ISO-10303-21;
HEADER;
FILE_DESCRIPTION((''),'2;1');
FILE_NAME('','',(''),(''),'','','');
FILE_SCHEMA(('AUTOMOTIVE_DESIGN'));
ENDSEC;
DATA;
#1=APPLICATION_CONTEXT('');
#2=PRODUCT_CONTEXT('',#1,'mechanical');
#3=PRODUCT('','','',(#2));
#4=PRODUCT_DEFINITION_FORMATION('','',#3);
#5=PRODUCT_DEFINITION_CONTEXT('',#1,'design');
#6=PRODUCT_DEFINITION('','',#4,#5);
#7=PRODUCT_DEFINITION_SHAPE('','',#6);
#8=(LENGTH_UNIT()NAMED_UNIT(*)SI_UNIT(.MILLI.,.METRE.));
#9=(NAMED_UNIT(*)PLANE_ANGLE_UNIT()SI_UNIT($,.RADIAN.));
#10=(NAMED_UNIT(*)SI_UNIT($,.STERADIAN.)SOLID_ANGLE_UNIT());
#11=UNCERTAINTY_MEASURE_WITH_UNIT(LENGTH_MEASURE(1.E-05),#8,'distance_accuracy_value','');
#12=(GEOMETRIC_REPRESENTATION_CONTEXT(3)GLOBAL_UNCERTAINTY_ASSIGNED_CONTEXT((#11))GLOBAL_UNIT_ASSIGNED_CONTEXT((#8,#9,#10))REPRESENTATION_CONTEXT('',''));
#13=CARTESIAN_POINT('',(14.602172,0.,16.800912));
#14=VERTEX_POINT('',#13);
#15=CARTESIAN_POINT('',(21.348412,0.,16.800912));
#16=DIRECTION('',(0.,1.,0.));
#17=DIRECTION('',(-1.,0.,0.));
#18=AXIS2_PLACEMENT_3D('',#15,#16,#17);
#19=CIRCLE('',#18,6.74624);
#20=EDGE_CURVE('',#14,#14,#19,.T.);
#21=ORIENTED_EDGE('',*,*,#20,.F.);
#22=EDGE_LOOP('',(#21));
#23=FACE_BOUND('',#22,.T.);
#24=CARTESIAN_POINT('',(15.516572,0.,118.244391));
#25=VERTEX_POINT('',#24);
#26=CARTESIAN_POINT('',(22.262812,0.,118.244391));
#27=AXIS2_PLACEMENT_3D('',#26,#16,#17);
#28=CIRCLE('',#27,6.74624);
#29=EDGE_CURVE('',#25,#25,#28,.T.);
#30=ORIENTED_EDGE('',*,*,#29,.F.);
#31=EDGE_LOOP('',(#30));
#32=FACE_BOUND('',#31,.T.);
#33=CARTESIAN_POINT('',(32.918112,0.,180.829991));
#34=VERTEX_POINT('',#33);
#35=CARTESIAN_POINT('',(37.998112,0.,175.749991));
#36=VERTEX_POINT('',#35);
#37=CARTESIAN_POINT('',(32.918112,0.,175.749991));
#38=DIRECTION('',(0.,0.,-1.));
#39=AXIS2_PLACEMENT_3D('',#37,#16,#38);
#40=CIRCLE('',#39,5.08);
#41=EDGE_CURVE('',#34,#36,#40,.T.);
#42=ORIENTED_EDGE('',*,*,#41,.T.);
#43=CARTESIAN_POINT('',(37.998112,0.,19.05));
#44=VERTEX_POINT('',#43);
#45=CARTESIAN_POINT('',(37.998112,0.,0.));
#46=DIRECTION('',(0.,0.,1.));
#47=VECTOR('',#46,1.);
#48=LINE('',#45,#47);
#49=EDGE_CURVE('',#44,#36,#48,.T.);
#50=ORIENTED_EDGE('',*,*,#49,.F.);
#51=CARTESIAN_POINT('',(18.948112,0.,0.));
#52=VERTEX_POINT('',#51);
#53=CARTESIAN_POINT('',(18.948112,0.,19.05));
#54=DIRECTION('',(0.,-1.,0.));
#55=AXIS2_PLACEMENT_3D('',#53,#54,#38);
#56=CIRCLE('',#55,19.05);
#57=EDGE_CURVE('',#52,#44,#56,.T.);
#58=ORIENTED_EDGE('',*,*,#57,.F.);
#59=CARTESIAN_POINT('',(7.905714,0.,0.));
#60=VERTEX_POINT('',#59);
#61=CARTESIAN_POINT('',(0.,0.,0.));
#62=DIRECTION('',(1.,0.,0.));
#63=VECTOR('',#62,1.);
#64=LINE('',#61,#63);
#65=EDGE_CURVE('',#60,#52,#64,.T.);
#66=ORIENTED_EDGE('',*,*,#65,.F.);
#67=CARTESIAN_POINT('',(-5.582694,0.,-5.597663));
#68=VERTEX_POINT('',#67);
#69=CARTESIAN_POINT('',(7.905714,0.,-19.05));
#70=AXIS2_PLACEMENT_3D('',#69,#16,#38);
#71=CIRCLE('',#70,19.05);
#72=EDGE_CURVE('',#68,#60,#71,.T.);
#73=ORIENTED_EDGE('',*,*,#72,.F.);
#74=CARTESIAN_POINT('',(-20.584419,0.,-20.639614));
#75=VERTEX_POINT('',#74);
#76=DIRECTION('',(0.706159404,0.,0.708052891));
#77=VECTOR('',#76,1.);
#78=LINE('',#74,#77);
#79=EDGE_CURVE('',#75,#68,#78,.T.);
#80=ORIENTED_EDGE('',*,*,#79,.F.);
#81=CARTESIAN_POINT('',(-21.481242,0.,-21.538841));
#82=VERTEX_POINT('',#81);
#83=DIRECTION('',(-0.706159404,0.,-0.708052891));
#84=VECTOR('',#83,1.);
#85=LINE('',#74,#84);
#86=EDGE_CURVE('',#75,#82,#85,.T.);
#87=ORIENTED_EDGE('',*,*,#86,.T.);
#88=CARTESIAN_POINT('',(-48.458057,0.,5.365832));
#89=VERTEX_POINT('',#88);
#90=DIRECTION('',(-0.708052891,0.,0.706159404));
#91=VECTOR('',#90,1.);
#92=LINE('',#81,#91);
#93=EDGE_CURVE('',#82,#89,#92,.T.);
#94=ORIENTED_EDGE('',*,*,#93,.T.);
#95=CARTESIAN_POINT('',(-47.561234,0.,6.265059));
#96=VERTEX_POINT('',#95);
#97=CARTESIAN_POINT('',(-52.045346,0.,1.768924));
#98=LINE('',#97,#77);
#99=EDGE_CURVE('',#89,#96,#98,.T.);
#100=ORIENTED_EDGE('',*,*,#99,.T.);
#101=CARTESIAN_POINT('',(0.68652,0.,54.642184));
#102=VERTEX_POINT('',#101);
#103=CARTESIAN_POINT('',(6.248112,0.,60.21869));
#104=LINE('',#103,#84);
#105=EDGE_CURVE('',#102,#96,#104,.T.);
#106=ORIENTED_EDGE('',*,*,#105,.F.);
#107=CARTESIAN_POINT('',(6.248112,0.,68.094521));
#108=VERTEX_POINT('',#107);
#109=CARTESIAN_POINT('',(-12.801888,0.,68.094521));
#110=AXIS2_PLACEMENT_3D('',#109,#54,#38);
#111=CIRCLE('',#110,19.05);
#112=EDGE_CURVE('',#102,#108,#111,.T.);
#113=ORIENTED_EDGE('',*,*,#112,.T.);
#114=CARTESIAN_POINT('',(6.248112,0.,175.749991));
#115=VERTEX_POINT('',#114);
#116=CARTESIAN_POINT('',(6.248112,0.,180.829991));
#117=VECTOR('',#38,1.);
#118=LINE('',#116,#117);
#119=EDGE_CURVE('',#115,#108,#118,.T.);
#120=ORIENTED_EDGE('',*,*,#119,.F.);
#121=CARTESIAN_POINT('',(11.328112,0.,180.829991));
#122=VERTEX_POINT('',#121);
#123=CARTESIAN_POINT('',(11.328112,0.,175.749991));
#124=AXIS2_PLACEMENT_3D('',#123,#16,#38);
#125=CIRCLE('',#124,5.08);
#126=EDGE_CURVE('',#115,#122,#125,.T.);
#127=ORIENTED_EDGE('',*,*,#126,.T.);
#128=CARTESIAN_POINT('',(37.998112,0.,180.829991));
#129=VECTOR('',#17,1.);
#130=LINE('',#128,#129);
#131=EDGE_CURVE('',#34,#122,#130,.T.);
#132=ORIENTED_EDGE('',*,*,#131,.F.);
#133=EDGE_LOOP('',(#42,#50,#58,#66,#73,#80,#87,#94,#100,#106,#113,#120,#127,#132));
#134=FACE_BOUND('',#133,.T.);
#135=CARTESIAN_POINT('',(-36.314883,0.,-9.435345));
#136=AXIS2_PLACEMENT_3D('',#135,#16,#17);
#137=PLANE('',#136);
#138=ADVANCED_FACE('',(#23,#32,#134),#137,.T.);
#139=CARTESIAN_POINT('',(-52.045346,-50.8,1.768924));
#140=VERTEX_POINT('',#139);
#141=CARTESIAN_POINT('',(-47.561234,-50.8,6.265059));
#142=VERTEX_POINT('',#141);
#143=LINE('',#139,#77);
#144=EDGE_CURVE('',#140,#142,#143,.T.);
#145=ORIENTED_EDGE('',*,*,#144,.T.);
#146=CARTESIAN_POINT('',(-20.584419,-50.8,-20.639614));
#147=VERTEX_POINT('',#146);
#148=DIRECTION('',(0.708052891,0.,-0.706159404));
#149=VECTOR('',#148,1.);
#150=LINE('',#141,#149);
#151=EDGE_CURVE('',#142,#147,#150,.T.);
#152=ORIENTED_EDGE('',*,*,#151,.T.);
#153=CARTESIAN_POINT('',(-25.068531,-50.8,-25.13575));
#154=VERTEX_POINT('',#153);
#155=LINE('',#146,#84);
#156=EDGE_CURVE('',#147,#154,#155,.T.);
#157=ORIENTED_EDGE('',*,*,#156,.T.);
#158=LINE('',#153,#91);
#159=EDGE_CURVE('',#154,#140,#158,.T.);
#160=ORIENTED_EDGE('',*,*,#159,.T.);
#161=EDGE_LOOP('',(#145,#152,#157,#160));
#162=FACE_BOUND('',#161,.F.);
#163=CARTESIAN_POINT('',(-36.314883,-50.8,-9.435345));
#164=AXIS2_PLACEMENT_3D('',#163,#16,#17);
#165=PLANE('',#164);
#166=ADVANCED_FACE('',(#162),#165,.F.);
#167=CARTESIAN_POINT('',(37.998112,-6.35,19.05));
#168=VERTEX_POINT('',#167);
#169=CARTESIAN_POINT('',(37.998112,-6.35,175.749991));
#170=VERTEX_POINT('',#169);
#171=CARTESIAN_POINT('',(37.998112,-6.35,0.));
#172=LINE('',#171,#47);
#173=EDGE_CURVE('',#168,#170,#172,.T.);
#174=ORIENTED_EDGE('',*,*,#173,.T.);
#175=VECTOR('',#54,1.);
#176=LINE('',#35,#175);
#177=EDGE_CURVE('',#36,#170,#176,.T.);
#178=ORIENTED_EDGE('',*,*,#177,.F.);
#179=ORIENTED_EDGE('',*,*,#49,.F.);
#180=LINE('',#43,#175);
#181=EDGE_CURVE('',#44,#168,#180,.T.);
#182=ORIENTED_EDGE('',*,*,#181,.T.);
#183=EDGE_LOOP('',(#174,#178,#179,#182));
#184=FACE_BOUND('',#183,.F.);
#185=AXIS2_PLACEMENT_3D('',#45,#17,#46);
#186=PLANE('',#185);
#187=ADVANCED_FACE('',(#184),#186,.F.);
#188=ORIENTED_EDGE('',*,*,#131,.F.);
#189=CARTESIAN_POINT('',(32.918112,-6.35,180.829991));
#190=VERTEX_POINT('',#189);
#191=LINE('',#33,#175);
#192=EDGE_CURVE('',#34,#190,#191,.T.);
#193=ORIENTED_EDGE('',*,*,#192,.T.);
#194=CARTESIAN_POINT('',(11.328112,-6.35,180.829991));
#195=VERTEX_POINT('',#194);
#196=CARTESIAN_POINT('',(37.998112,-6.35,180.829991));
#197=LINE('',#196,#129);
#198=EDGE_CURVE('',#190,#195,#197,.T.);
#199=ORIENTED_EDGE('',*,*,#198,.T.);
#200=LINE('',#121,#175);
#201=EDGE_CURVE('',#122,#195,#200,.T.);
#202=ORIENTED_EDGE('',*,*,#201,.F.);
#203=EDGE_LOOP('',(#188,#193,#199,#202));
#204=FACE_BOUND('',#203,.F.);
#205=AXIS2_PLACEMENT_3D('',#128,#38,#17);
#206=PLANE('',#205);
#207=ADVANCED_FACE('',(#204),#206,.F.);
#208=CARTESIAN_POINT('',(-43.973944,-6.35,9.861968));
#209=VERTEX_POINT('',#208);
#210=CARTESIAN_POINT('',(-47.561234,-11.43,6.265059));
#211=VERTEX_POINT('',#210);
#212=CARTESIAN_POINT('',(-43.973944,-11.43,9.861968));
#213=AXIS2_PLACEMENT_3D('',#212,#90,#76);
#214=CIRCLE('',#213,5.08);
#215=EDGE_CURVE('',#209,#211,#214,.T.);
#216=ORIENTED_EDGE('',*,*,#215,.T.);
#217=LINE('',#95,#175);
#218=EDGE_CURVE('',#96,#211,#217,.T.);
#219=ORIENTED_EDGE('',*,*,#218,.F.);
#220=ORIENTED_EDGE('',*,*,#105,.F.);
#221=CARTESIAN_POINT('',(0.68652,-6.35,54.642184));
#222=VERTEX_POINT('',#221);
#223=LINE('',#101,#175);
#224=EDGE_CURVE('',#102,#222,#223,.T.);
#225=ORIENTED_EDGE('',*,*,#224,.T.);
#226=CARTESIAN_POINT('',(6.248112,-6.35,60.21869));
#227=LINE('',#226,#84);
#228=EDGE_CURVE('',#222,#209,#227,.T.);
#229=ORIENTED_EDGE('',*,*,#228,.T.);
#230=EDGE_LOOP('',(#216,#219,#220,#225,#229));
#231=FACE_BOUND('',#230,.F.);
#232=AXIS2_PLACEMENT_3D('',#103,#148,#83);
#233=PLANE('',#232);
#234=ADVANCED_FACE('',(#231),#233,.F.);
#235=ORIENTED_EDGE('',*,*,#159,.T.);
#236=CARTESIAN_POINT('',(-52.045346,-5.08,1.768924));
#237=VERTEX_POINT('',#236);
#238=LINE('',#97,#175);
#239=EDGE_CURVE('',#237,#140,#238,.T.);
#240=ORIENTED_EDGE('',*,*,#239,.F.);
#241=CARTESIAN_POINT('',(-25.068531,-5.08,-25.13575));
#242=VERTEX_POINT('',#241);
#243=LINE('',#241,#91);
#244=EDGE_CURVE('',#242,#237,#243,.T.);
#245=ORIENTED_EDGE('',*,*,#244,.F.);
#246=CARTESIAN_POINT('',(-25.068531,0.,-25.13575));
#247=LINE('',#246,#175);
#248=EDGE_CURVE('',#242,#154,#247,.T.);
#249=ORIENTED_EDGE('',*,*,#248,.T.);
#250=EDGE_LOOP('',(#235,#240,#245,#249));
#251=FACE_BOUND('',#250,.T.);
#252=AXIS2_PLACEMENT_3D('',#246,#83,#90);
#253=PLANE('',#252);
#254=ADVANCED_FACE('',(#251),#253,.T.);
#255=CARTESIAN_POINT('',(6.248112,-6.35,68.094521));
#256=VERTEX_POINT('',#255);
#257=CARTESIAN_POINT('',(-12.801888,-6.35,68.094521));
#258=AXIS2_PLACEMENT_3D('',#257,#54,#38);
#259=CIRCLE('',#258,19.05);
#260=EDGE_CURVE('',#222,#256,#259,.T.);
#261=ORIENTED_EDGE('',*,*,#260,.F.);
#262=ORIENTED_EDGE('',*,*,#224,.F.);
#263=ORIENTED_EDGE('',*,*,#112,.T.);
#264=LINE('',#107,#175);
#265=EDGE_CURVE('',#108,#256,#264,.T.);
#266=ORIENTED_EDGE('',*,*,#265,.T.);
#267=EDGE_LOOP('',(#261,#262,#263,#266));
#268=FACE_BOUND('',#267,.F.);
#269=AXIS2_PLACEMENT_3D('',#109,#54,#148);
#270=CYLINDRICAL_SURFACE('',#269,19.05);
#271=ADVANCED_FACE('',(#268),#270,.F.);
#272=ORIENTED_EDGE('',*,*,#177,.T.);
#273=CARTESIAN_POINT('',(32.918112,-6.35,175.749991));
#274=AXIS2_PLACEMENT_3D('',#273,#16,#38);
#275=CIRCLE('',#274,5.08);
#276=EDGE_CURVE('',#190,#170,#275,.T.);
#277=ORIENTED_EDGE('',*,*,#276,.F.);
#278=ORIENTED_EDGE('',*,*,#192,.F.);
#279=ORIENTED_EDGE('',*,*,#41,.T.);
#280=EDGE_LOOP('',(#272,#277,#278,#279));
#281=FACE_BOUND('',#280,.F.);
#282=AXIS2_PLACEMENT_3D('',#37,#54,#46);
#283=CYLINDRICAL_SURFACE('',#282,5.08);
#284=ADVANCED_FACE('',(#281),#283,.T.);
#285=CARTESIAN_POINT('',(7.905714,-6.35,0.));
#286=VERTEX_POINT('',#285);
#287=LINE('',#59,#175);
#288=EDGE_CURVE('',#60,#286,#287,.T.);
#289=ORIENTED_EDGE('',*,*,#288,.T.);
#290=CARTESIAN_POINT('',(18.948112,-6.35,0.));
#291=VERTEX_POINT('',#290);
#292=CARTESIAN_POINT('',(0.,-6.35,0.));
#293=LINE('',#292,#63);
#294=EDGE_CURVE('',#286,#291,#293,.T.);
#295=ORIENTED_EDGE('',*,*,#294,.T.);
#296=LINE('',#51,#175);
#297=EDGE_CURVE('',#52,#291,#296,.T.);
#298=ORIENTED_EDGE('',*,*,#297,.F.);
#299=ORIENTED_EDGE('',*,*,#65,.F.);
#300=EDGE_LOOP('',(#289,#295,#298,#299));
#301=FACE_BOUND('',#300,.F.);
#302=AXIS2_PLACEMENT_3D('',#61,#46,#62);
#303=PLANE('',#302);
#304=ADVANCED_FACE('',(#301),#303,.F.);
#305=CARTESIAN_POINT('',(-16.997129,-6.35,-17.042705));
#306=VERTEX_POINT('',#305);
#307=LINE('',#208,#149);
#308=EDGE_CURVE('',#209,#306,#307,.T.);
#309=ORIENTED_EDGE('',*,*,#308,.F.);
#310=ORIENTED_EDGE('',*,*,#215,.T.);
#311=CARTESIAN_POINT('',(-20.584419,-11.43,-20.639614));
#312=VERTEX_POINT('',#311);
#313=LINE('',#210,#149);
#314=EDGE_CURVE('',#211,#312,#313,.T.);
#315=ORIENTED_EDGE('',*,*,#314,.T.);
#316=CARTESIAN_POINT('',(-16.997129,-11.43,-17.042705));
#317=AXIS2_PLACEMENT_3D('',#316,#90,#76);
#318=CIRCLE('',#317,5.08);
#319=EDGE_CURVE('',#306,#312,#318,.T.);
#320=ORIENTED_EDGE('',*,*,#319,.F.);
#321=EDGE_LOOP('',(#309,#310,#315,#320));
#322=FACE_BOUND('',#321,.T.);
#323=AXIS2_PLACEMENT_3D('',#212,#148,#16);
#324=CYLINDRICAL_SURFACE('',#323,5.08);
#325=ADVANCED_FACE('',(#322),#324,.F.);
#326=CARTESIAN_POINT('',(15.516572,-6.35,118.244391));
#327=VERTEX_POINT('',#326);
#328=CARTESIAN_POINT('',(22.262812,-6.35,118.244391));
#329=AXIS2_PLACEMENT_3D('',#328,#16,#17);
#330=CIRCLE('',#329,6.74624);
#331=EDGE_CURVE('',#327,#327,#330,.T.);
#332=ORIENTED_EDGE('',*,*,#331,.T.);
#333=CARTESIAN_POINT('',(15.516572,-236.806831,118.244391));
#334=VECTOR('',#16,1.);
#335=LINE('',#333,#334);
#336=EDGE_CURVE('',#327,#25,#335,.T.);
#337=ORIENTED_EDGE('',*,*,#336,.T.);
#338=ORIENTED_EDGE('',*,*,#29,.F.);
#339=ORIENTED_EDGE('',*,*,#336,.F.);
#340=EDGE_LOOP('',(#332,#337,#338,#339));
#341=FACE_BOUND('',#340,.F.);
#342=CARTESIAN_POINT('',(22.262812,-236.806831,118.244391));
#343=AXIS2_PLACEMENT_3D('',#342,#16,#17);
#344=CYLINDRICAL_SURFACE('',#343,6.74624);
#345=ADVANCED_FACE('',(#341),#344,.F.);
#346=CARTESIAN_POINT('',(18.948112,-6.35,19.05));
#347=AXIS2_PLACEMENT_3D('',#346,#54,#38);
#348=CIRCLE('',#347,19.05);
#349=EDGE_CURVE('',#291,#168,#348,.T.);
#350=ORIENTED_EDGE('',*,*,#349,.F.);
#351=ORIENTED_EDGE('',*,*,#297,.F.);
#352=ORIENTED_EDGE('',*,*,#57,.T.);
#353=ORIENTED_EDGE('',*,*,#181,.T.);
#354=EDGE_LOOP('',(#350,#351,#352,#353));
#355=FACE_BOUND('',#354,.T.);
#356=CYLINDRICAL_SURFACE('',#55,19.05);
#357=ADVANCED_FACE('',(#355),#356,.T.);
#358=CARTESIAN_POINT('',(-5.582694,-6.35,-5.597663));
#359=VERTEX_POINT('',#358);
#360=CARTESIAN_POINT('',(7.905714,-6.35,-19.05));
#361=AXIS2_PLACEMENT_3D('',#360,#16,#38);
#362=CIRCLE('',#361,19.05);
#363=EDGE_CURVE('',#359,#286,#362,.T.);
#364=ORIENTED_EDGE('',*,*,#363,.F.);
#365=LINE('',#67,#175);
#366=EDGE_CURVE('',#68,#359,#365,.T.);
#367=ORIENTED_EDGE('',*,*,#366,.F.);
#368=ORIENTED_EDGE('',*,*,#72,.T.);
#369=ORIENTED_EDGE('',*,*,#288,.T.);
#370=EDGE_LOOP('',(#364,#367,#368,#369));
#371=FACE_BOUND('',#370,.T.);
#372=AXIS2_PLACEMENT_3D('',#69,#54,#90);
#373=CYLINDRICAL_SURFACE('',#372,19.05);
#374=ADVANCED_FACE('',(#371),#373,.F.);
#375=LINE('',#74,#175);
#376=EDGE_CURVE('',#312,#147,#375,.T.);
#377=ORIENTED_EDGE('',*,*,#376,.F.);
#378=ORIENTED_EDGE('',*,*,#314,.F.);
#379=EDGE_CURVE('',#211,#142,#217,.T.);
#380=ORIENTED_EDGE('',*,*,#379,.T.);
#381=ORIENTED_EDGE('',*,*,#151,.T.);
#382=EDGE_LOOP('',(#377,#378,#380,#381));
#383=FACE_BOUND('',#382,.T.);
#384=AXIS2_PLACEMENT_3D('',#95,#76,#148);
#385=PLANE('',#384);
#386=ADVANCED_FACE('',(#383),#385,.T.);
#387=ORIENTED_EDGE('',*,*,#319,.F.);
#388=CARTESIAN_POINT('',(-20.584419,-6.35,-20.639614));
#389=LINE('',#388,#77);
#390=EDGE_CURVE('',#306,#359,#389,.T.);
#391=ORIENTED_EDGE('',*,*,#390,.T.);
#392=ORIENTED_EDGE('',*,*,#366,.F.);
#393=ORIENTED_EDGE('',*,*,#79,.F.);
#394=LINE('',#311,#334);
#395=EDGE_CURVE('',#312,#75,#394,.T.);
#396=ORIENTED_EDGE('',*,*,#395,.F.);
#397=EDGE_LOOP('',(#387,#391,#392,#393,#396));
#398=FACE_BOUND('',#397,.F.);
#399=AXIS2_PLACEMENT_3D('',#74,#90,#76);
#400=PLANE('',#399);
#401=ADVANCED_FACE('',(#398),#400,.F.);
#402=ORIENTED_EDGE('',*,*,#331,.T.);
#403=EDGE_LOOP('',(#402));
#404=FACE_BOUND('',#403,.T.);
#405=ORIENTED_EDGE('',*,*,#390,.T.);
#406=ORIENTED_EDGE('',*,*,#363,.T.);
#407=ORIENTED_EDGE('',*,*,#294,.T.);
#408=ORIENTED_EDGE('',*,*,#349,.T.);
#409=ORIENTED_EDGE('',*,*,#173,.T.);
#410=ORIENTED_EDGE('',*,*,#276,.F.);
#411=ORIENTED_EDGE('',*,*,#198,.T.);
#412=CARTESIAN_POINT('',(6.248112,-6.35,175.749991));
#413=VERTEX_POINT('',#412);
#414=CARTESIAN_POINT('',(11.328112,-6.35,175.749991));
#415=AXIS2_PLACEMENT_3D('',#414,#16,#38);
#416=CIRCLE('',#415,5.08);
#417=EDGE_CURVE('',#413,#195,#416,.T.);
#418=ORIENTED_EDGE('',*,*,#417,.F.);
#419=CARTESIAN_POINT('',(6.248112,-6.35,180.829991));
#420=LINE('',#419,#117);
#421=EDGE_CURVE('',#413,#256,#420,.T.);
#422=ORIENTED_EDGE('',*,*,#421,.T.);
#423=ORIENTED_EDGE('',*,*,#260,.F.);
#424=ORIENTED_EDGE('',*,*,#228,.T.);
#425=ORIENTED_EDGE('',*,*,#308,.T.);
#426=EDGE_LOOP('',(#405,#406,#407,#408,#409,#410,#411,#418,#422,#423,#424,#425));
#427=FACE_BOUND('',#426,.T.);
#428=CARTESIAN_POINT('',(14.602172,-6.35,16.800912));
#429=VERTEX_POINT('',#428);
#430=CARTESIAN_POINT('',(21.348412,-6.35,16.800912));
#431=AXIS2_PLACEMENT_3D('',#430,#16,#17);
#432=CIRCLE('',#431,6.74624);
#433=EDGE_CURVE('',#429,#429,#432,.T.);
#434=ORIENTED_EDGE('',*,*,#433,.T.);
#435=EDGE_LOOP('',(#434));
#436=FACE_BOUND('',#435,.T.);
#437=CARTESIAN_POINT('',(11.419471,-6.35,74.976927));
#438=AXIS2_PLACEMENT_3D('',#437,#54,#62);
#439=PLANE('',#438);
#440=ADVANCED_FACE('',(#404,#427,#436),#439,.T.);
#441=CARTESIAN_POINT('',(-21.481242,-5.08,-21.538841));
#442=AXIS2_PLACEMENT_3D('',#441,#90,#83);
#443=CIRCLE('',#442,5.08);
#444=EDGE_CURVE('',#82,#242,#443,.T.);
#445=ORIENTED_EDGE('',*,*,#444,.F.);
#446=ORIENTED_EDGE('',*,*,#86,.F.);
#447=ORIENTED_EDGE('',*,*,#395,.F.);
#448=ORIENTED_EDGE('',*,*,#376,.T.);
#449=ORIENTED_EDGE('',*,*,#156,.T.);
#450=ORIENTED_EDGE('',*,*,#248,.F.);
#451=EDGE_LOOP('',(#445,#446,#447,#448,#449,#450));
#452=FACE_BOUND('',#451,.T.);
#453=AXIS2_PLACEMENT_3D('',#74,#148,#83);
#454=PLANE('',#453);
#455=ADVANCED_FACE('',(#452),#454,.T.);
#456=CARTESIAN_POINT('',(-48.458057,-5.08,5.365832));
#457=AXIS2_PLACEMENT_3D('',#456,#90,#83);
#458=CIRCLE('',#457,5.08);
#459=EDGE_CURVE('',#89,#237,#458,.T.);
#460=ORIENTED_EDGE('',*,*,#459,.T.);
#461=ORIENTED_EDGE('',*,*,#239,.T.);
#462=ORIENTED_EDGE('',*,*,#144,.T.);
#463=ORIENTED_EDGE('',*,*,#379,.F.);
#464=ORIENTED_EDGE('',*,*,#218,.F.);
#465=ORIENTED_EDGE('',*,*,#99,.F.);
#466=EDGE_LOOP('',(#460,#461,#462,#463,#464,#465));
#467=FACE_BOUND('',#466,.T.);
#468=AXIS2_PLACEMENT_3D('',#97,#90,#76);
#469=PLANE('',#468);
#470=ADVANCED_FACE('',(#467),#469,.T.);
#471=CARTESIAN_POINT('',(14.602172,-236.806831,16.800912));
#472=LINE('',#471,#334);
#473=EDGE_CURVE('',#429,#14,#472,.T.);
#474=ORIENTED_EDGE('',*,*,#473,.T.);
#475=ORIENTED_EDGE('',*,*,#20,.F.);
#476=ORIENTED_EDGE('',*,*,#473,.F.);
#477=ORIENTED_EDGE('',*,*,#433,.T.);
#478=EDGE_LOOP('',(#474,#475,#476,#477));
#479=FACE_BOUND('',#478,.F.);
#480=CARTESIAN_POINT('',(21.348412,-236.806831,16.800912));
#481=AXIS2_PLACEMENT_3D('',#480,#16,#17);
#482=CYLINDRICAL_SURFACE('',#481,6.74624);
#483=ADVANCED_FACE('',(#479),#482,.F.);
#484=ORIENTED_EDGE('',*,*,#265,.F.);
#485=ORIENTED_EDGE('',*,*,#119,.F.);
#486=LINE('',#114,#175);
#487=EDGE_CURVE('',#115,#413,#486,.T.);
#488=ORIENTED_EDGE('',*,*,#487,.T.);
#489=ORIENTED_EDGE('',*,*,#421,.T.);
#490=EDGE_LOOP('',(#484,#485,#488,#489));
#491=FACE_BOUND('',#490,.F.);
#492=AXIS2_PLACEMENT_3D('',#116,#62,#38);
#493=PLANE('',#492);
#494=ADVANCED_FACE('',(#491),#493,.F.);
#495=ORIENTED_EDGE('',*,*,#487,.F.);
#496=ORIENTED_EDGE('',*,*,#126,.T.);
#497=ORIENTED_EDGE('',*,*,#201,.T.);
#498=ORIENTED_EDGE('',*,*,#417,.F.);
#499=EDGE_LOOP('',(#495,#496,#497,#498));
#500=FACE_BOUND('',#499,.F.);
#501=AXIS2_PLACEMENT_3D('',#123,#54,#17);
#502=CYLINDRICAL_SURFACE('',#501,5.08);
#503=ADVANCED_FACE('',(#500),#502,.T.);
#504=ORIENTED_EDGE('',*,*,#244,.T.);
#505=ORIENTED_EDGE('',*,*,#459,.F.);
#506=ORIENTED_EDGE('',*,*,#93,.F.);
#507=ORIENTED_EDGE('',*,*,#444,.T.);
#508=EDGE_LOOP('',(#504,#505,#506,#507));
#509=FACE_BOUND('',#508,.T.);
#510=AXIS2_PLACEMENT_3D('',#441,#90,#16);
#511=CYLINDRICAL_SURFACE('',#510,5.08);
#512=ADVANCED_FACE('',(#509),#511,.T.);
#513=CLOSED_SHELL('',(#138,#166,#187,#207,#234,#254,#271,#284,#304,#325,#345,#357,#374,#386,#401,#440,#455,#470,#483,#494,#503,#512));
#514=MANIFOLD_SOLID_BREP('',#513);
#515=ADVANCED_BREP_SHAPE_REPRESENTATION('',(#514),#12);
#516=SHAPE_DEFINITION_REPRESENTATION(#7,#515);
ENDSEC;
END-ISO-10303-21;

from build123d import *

# Parameters (mm, degrees)
F1_DEPTH = 6.35
F3_DEPTH = 50.8
F5_D     = 13.49248
F6_R     = 19.05
F7_R     = 5.08
F8_R     = 5.08


# Not quite as in the source:
# - a feature names something its author has since deleted; it is built from what else it names


with BuildPart() as f1:
    # F0 (on Front) → F1 (new body)
    with BuildSketch(Plane.XZ):
        Polygon((37.9981123171, 180.8299914), (6.2481123171, 180.8299914), (6.2481123171, 60.2186896705), (-47.5612342455, 6.2650593709), (-20.5844190958, -20.6396139104), (0, 0), (6.2481123171, 0), (37.9981123171, 0), (37.9981123171, 33.02), align=None)
    extrude(amount=F1_DEPTH)

    # F2 (on face) → F3 (join)
    with BuildSketch(Plane(origin=(0, 0, 0), x_dir=(-1, 0, 0), z_dir=(0, 1, 0))):
        Polygon((52.0453464591, 1.7689235126), (47.5612342455, 6.2650593709), (20.5844190958, -20.6396139104), (25.0685313093, -25.1357497687), align=None)
    extrude(amount=-F3_DEPTH)

    # F5 (through all)
    with Locations(Plane.XZ.offset(6.35)):
        with Locations((22.2628123171, 118.2443914), (21.3484123171, 16.8009124652)):
            Hole(F5_D / 2)

    # F6
    f6_edges = [f1.edges().sort_by_distance(p)[0] for p in [
        (6.248112, -3.175, 60.21869),
        (37.998112, -3.175, 0),
        (0, -3.175, 0),
    ]]
    fillet(f6_edges, radius=F6_R)

    # F7
    f7_edges = [f1.edges().sort_by_distance(p)[0] for p in [
        (-38.556939, 0, -11.683413),
        (-34.072827, -6.35, -7.187277),
    ]]
    fillet(f7_edges, radius=F7_R)

    # F8
    f8_edges = [f1.edges().sort_by_distance(p)[0] for p in [
        (6.248112, -3.175, 180.829991),
        (37.998112, -3.175, 180.829991),
    ]]
    fillet(f8_edges, radius=F8_R)


solid = f1.part
